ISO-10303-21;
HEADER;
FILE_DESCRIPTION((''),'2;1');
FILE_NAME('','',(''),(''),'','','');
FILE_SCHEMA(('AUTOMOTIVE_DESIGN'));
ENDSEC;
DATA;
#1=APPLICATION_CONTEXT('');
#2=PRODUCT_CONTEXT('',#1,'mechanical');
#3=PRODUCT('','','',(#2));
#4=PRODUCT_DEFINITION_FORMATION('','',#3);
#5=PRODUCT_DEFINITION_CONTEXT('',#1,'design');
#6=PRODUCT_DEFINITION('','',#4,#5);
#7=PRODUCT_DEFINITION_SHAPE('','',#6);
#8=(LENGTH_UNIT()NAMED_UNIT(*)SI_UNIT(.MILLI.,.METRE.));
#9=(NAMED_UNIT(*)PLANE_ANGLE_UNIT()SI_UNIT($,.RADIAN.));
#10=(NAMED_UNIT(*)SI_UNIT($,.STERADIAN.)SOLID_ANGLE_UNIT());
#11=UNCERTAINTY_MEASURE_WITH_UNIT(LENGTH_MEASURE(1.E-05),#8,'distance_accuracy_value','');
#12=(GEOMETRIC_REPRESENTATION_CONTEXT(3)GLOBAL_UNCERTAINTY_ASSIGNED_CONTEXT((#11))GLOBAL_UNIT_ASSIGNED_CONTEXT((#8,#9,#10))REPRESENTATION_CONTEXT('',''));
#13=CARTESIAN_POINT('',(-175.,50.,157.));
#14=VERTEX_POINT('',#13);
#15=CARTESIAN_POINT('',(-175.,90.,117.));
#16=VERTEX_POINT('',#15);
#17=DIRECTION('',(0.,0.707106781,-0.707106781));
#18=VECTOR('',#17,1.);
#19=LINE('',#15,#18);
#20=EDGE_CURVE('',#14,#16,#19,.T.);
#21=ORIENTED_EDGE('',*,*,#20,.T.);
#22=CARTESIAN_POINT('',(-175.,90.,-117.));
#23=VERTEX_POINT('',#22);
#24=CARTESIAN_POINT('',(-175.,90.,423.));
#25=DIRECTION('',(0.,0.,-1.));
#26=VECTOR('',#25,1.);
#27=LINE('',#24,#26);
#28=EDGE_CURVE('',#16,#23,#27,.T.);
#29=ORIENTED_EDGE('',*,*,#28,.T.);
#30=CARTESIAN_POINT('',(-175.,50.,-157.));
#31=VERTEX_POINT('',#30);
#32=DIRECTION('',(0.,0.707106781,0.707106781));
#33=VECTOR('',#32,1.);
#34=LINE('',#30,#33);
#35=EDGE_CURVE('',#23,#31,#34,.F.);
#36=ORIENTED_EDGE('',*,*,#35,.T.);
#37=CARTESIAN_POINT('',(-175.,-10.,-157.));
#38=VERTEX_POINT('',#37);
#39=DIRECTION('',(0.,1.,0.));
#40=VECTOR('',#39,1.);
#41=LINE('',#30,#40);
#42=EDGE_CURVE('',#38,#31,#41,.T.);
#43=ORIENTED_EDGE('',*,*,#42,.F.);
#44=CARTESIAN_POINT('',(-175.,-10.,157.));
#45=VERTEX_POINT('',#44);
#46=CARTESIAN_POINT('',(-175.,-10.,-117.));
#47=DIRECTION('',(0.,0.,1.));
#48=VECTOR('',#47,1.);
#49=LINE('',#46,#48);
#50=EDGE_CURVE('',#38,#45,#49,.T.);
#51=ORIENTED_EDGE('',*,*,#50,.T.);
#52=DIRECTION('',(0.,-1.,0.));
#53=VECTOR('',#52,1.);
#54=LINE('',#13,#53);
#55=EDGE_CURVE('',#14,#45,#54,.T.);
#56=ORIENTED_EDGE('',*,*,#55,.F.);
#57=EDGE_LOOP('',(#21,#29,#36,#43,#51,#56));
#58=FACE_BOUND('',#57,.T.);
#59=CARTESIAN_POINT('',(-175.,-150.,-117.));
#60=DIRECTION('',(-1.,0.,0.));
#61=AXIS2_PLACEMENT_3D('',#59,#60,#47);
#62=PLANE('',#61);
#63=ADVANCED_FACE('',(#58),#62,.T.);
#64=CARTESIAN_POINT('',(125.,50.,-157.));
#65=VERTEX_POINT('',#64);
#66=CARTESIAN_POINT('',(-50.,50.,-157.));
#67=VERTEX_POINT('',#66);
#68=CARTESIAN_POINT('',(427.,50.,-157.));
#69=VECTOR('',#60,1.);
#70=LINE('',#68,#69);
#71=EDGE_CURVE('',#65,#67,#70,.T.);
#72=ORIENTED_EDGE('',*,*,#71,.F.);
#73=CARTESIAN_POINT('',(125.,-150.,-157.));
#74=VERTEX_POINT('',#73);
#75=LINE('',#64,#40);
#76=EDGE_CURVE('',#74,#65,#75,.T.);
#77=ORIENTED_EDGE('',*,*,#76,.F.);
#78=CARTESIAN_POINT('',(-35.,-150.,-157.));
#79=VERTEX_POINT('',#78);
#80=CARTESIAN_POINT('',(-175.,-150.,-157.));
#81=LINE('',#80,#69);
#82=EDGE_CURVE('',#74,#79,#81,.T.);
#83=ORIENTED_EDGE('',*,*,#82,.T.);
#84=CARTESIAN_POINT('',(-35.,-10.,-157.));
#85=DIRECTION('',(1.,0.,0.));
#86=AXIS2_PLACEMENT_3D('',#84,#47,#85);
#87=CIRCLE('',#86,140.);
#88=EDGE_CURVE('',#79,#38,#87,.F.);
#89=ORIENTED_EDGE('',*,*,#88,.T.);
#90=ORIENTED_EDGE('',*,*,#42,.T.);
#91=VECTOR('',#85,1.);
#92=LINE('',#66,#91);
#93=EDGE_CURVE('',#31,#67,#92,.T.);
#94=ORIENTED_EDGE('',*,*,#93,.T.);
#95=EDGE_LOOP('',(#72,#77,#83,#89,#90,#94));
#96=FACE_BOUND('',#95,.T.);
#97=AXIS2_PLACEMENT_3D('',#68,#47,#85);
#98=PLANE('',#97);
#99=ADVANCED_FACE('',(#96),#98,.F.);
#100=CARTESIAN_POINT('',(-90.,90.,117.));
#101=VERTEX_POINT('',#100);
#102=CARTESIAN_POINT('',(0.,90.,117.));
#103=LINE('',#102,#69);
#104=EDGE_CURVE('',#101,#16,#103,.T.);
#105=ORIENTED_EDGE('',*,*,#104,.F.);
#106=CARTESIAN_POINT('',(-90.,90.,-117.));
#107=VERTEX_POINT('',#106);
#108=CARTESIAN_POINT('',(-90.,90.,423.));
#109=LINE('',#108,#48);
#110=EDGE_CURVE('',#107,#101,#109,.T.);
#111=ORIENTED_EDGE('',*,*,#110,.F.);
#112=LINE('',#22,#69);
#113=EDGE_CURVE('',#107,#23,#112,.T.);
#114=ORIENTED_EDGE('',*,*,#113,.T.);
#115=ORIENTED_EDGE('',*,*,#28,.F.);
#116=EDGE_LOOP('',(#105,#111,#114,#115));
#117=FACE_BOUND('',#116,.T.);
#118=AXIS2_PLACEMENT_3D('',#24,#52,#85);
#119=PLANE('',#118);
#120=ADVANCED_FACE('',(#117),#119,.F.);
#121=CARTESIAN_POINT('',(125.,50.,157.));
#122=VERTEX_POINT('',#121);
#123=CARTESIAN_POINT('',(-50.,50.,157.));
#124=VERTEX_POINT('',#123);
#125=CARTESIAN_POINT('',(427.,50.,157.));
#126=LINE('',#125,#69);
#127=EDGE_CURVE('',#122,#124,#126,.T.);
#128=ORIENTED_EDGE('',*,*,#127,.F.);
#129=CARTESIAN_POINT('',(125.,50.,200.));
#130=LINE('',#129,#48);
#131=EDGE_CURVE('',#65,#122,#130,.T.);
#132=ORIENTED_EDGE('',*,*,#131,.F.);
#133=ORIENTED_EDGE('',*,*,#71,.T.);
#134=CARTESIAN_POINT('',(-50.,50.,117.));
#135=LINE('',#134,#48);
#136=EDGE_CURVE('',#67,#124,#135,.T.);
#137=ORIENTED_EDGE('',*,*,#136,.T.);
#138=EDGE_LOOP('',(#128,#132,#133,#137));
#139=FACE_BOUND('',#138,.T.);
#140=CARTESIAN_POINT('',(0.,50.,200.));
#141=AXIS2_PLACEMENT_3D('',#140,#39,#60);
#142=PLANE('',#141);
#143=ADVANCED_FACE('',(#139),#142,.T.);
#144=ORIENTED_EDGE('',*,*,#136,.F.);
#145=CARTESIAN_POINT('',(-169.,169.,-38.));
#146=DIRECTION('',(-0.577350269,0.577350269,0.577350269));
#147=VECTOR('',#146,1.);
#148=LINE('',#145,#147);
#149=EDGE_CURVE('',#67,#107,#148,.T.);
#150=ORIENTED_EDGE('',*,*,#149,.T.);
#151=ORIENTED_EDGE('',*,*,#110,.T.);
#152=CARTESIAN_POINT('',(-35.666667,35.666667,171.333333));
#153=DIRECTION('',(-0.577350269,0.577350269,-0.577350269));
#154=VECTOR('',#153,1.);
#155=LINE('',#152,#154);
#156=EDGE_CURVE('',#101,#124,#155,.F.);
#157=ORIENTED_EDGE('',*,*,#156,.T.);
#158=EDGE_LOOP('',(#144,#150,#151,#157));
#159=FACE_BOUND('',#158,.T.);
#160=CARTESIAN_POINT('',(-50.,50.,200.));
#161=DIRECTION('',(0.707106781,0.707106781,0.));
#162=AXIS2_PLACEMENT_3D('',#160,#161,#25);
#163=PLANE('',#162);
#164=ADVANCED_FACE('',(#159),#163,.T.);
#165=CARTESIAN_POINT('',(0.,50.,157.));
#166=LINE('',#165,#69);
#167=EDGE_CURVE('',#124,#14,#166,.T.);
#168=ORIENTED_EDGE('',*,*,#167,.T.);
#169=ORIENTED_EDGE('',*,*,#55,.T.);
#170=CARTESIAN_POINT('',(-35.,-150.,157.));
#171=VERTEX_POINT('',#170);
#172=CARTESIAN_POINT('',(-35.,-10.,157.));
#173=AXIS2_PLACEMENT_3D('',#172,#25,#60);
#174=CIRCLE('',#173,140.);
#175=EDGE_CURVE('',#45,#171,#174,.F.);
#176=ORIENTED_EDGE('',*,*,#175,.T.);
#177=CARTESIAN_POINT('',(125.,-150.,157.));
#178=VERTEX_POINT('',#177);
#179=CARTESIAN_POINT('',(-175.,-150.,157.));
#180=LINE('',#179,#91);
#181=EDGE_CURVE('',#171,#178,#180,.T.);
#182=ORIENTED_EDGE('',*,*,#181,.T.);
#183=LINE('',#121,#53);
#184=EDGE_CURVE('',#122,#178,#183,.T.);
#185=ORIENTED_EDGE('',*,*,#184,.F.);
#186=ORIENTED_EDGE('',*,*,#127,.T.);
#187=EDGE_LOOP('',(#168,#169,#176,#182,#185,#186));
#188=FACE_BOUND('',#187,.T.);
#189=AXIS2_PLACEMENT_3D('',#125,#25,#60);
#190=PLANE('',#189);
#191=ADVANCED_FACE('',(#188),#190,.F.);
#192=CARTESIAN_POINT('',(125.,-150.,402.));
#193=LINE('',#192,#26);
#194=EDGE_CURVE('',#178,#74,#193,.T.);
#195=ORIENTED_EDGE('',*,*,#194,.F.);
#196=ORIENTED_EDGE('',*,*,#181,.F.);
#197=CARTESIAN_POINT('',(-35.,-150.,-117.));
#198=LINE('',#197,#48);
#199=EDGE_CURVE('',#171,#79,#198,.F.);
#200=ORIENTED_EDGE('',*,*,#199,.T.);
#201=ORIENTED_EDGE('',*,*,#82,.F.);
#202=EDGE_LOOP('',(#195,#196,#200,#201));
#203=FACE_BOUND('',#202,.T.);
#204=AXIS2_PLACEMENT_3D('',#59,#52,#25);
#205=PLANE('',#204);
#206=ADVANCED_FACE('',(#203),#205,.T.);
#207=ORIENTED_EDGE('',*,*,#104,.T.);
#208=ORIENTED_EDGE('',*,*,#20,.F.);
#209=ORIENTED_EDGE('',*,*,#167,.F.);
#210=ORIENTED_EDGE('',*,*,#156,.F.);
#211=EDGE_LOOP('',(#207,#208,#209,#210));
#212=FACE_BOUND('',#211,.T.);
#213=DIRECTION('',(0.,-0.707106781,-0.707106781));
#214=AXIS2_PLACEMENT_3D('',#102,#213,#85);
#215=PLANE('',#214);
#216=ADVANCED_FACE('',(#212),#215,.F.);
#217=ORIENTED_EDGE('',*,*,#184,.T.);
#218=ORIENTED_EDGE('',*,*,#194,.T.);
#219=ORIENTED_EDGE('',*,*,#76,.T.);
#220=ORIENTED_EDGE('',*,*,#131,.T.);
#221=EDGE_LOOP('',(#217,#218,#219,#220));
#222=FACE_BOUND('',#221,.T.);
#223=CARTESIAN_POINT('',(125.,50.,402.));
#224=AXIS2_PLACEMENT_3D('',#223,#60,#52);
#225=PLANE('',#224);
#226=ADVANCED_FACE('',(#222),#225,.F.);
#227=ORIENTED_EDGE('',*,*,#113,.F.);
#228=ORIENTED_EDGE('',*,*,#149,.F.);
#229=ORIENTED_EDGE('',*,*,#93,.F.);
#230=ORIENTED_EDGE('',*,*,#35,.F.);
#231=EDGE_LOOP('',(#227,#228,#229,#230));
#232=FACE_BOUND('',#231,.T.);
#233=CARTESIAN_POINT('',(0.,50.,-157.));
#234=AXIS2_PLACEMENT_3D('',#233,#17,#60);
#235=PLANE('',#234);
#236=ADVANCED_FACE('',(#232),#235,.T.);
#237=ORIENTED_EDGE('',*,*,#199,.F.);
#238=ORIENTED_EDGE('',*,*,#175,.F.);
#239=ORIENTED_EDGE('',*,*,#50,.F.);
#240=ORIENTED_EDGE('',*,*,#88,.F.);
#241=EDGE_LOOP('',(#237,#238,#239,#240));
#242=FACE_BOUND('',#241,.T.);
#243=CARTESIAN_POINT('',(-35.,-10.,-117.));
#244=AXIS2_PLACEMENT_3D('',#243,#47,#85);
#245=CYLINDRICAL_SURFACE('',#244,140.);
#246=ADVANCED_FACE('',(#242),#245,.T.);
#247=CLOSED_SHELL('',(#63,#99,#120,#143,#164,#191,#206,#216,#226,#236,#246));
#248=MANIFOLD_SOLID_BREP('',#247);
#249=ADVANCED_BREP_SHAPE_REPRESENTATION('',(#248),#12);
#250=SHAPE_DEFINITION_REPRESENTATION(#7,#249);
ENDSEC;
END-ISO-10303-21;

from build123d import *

# Parameters (mm, degrees)
BOSS_EXTRUDE1_DEPTH      = 117
BOSS_EXTRUDE1_DEPTH_BACK = 117
SKETCH1_W                = 350
SKETCH1_H                = 300
BOSS_EXTRUDE2_DEPTH      = 200
BOSS_EXTRUDE2_DEPTH_BACK = 200
CUT_EXTRUDE1_DEPTH       = 540
CUT_EXTRUDE2_DEPTH       = 138
CUT_EXTRUDE2_DEPTH_BACK  = 540
CHAMFER1_SIZE            = 40
CHAMFER2_SIZE            = 40
FILLET1_R                = 140
CUT_EXTRUDE3_DEPTH       = 602.0000000000001
CUT_EXTRUDE4_DEPTH       = 602.0000000000001


with BuildPart() as part:
    # Sketch1 → Boss-Extrude1 (new, two sides: drawn at the far end of the back side and taken through both)
    with BuildSketch(Plane.XY.offset(-BOSS_EXTRUDE1_DEPTH_BACK)):
        Rectangle(SKETCH1_W, SKETCH1_H)
    extrude(amount=BOSS_EXTRUDE1_DEPTH + BOSS_EXTRUDE1_DEPTH_BACK)

    # Sketch3 → Boss-Extrude2 (add, two sides: drawn at the far end of the back side and taken through both)
    with BuildSketch(Plane(origin=(0, 0, 0), x_dir=(-1, 0, 0), z_dir=(0, 0, -1)).offset(-BOSS_EXTRUDE2_DEPTH_BACK)):
        Polygon((-175, 150), (-175, -150), (175, -150), (174.99999999999997, 50.00000000000006), (-75.00000000000003, 50.000000000000014), (-75.00000000000004, 150), align=None)
    extrude(amount=BOSS_EXTRUDE2_DEPTH + BOSS_EXTRUDE2_DEPTH_BACK)

    # Sketch4 → Cut-Extrude1 (cut)
    with BuildSketch(Plane(origin=(0, 0, -117), x_dir=(-1, 0, 0), z_dir=(0, 0, -1))):
        Polygon((174.99999999999997, 150), (-75.00000000000004, 149.99999999999997), (-75.00000000000004, 89.99999999999997), (174.99999999999997, 90), align=None)
    extrude(amount=-CUT_EXTRUDE1_DEPTH, mode=Mode.SUBTRACT)

    # Sketch6 → Cut-Extrude2 (cut, two sides: drawn at the far end of the back side and taken through both)
    with BuildSketch(Plane(origin=(0, 0, -117), x_dir=(-1, 0, 0), z_dir=(0, 0, -1)).offset(-CUT_EXTRUDE2_DEPTH_BACK)):
        Polygon((-188.8193544446854, 158.10037053286104), (89.99999999999997, 158.10037053286104), (89.99999999999997, 50.00000000000004), (-188.8193544446854, 50.00000000000003), align=None)
    extrude(amount=CUT_EXTRUDE2_DEPTH + CUT_EXTRUDE2_DEPTH_BACK, mode=Mode.SUBTRACT)

    # Chamfer1
    chamfer1_edges = [part.edges().sort_by_distance(p)[0] for p in [
        (-89.99999999999997, 50.00000000000004, 0),
    ]]
    chamfer(chamfer1_edges, length=CHAMFER1_SIZE - 0.0001)  # a hair under: the kernel refuses the full size

    # Chamfer2
    chamfer2_edges = [part.edges().sort_by_distance(p)[0] for p in [
        (-112.50004999999997, 50.00000000000004, 117),
        (-112.50004999999997, 50.00000000000004, -117),
    ]]
    chamfer(chamfer2_edges, length=CHAMFER2_SIZE - 0.0001)  # a hair under: the kernel refuses the full size

    # Fillet1
    fillet1_edges = [part.edges().sort_by_distance(p)[0] for p in [
        (-175, -150, 0),
    ]]
    fillet(fillet1_edges, radius=FILLET1_R)

    # Sketch7 → Cut-Extrude3 (cut)
    with BuildSketch(Plane(origin=(0, 0, -200), x_dir=(-1, 0, 0), z_dir=(0, 0, -1))):
        Polygon((-124.99999999999997, 50.00000000000004), (-124.99999999999996, -150), (-196.63418814024195, -174.37612145790905), (-210.87565010922705, 102.36305485317497), align=None)
    extrude(amount=-CUT_EXTRUDE3_DEPTH, mode=Mode.SUBTRACT)

    # Sketch8 → Cut-Extrude4 (cut)
    with BuildSketch(Plane.ZY.offset(174.99999999999997)):
        Polygon((156.99999999999991, 50.00000000000004), (156.99999999999991, -180.65334412999255), (404.27559038441177, -197.1355795745069), (273.0172818180443, 154.636687383358), align=None)
        Polygon((-157.00000000000037, 50.00000000000004), (-157.00000000000037, -188.89446185224972), (-332.7435139552091, -205.02559262419945), (-278.28880023445754, 167.10797834540983), align=None)
    extrude(amount=-CUT_EXTRUDE4_DEPTH, mode=Mode.SUBTRACT)


solid = part.part
